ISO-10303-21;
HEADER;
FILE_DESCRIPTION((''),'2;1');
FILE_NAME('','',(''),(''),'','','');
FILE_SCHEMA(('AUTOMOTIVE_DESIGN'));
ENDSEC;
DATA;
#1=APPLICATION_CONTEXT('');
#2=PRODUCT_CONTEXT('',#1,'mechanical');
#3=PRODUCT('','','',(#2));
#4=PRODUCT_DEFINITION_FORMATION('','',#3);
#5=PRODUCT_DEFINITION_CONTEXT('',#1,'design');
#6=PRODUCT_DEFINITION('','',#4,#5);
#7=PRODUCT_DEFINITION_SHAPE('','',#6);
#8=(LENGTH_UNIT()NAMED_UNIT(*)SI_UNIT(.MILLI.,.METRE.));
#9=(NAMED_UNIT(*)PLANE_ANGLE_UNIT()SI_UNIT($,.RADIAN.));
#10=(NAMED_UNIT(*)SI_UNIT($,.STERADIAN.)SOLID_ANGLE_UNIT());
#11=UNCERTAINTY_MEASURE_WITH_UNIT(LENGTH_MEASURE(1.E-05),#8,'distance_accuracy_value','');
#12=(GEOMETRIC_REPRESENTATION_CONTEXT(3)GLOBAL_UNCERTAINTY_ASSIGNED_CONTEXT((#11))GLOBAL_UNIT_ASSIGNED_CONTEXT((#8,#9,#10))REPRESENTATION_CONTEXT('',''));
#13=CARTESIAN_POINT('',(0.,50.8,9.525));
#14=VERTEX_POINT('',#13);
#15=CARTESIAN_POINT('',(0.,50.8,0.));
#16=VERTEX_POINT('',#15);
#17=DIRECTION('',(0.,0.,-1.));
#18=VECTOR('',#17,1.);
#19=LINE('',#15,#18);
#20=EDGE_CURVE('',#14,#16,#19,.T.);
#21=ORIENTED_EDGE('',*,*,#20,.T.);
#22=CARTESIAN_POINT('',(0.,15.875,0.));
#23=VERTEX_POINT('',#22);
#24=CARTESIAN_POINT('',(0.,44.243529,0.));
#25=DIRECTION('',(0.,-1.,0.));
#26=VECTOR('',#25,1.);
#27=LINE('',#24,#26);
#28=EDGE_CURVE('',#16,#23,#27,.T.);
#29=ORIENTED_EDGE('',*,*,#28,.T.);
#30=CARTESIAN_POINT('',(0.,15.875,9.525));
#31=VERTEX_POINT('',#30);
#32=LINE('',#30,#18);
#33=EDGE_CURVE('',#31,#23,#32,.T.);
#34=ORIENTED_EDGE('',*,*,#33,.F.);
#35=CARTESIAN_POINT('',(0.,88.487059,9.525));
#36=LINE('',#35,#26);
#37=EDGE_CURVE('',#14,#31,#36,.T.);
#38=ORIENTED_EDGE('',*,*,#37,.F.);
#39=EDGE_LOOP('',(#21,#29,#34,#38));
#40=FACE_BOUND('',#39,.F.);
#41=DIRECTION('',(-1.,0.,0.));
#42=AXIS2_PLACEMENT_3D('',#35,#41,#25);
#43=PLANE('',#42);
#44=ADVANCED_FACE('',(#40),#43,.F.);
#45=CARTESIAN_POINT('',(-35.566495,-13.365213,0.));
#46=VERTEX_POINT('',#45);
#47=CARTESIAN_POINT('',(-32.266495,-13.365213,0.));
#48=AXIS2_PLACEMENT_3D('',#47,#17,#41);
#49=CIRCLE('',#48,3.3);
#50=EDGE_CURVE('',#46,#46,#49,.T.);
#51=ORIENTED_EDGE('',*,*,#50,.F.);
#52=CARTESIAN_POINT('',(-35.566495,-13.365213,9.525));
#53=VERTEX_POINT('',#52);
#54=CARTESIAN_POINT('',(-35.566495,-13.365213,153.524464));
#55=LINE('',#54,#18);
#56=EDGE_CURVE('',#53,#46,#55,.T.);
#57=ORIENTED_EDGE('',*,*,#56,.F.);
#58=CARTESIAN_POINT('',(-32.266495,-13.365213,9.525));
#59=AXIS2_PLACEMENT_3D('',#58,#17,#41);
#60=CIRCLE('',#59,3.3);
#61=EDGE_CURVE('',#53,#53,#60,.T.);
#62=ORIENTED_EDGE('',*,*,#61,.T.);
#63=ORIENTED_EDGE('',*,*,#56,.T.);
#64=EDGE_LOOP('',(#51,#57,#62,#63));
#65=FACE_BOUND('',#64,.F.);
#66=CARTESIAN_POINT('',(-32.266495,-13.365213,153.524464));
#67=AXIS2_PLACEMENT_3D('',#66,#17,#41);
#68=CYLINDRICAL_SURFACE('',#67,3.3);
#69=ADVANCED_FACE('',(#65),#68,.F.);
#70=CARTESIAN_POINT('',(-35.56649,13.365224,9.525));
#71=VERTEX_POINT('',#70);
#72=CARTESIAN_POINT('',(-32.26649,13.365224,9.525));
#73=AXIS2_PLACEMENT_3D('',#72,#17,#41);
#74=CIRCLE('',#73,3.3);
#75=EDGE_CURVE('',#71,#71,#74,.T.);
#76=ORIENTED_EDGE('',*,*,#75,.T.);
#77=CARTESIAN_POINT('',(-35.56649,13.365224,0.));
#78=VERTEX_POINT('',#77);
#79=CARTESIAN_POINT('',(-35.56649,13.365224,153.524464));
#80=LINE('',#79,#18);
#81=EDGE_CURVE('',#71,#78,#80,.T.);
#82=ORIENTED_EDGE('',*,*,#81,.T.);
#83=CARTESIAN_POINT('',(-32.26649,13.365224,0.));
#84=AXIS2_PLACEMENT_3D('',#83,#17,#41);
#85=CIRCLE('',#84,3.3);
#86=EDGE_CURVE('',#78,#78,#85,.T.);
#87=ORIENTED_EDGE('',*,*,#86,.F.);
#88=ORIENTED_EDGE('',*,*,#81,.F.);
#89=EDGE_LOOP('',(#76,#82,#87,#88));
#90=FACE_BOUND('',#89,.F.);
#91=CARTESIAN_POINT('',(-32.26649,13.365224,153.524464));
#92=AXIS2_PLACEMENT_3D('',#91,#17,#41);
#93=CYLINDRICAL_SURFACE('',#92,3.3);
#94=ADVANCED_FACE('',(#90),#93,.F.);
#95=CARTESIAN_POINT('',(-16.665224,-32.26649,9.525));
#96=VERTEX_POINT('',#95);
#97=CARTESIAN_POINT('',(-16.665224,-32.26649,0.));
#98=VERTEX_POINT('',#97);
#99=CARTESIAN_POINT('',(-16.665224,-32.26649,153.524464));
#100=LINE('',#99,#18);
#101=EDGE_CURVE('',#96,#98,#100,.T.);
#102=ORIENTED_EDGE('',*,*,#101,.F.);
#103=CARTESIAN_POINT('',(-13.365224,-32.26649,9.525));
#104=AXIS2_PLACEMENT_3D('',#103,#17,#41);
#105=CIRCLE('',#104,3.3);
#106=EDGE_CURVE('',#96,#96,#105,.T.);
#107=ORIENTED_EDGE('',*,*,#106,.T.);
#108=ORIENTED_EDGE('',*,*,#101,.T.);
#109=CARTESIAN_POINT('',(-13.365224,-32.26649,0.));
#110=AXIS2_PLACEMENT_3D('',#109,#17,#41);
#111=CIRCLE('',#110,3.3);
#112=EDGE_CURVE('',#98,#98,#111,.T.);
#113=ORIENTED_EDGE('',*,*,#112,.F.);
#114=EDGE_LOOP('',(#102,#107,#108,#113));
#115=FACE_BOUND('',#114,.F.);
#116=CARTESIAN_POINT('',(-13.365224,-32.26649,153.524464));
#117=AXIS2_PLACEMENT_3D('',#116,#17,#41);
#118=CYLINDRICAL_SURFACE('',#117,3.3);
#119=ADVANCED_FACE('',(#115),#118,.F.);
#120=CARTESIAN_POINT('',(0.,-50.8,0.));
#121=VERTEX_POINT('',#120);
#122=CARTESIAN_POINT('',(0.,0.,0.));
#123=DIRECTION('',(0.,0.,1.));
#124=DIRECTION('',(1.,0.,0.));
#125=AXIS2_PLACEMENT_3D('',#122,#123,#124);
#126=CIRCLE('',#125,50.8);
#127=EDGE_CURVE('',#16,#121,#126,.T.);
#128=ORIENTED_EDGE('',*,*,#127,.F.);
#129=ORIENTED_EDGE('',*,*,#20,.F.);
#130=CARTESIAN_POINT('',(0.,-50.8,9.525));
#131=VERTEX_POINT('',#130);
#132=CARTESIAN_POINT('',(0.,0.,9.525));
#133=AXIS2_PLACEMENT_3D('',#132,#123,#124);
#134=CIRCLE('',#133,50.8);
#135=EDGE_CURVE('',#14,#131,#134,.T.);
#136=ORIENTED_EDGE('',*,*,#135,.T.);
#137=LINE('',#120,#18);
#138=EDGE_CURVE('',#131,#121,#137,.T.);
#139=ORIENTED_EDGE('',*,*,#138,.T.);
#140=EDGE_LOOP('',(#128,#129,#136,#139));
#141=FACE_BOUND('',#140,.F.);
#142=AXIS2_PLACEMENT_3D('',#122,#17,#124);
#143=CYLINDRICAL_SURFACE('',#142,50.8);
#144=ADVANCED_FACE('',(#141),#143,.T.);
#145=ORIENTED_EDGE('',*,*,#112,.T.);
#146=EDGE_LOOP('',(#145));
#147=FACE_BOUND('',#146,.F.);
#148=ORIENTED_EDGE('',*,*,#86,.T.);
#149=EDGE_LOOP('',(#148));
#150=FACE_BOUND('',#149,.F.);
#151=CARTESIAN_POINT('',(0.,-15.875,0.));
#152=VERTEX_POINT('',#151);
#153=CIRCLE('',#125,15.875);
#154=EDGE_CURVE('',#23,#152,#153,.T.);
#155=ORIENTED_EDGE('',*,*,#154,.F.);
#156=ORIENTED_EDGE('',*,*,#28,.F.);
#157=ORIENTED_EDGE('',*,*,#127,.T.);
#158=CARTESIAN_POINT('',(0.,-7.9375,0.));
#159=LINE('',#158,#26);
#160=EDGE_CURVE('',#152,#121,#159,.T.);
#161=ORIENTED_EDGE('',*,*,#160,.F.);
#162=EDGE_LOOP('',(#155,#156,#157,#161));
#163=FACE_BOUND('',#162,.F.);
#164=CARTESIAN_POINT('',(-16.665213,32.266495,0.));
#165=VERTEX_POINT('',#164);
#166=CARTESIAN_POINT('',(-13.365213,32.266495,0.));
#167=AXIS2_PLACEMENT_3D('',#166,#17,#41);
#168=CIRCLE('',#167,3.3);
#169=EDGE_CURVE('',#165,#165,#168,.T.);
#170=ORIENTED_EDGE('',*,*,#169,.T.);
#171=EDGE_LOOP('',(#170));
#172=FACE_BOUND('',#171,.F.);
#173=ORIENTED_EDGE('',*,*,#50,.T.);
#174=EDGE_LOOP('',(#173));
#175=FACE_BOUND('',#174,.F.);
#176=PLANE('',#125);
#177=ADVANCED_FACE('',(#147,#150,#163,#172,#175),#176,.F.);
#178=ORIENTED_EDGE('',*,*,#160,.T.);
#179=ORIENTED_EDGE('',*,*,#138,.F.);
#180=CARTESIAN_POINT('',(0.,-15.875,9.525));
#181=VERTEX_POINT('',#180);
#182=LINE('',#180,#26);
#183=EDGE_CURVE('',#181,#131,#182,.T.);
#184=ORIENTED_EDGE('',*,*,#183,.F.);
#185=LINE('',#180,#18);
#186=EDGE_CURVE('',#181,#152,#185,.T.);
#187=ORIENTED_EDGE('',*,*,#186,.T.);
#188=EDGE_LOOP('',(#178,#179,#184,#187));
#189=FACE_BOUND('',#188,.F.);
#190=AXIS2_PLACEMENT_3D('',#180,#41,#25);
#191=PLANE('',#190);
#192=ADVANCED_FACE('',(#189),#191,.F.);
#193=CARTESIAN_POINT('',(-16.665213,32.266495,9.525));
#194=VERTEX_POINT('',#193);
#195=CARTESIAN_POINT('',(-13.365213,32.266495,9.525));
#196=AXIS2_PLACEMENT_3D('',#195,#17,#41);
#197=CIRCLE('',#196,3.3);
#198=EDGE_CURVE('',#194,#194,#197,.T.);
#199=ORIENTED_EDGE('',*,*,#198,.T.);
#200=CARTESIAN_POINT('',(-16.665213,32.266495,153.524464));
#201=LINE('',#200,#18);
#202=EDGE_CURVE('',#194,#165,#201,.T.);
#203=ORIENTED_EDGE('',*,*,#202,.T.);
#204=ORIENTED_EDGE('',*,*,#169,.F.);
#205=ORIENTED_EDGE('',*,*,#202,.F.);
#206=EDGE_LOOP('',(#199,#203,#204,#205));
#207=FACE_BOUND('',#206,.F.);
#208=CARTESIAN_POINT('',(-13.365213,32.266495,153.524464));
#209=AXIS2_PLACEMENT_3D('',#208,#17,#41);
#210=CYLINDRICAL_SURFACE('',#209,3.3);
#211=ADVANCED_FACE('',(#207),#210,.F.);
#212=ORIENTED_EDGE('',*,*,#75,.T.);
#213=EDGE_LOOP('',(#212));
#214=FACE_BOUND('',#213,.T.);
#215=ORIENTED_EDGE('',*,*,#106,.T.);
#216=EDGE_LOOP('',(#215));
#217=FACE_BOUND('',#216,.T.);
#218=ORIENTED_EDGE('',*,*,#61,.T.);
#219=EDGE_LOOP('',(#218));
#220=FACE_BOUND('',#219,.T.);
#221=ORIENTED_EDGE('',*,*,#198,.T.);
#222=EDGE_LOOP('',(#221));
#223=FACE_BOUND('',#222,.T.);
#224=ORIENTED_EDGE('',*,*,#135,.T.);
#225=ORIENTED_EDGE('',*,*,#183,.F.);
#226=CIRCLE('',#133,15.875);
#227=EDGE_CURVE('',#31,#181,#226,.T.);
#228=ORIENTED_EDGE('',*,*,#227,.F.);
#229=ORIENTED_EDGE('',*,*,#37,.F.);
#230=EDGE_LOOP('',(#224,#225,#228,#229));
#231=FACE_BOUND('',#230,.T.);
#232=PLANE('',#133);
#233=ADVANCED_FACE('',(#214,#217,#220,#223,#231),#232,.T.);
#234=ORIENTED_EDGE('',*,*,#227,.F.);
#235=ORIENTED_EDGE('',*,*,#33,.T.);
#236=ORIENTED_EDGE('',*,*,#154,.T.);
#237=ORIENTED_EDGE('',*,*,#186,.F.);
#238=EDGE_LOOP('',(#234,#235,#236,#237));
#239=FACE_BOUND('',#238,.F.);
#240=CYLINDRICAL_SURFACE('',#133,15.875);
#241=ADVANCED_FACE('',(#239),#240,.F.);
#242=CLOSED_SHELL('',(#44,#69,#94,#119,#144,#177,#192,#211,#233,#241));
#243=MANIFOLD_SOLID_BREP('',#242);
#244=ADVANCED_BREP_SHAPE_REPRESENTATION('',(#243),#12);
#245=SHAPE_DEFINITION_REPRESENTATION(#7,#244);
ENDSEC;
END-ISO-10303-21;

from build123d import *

# Parameters (mm, degrees)
F0_R     = 50.8
F1_DEPTH = 9.525
F2_R     = 15.875
F3_DEPTH = 9.526
F5_D     = 6.6
F6_R     = 3.3
F7_DEPTH = 9.526


with BuildPart() as f1:
    # F0 (on Top) → F1 (new body)
    with BuildSketch(Plane.XY):
        Circle(F0_R)
    extrude(amount=F1_DEPTH)

    # F2 (on face) → F3 (cut, through all)
    with BuildSketch(Plane.XY.offset(9.525)):
        Circle(F2_R)
    extrude(amount=-F3_DEPTH, mode=Mode.SUBTRACT)

    # F5 (through all)
    with Locations(Plane.XY.offset(9.525)):
        with Locations((-13.3652133, 32.2664949823), (-32.2664903636, 13.3652244507), (-32.2664949823, -13.3652133), (-13.3652244507, -32.2664903636), (13.3652133, -32.2664949823), (32.2664903636, -13.3652244507), (32.2664949823, 13.3652133), (13.3652244507, 32.2664903636)):
            Hole(F5_D / 2)

    # F6 (on face) → F7 (cut, through all)
    with BuildSketch(Plane.XY.offset(9.525)):
        with BuildLine():
            Line((92.0014753938, 88.4870588779), (0, 88.4870588779))
            Line((0, 88.4870588779), (0, 50.8))
            ThreePointArc((0, 50.8), (35.9210244843, 35.9210244843), (50.8, 0))
            ThreePointArc((50.8, 0), (35.9210244843, -35.9210244843), (0, -50.8))
            Line((0, -50.8), (0, -93.3939293027))
            Line((0, -93.3939293027), (92.0014753938, -93.3939293027))
            Line((92.0014753938, -93.3939293027), (92.0014753938, 88.4870588779))
        make_face()
        with BuildLine():
            ThreePointArc((50.8, 0), (35.9210244843, 35.9210244843), (0, 50.8))
            Line((0, 50.8), (0, 15.875))
            ThreePointArc((0, 15.875), (11.2253201513, 11.2253201513), (15.875, 0))
            ThreePointArc((15.875, 0), (11.2253201513, -11.2253201513), (0, -15.875))
            Line((0, -15.875), (0, -50.8))
            ThreePointArc((0, -50.8), (35.9210244843, -35.9210244843), (50.8, 0))
        make_face()
        with Locations((13.3652133, -32.2664949823)):
            Circle(F6_R, mode=Mode.SUBTRACT)
        with Locations((32.2664903636, -13.3652244507)):
            Circle(F6_R, mode=Mode.SUBTRACT)
        with Locations((13.3652244507, 32.2664903636)):
            Circle(F6_R, mode=Mode.SUBTRACT)
        with Locations((32.2664949823, 13.3652133)):
            Circle(F6_R, mode=Mode.SUBTRACT)
    extrude(amount=-F7_DEPTH, mode=Mode.SUBTRACT)


solid = f1.part
